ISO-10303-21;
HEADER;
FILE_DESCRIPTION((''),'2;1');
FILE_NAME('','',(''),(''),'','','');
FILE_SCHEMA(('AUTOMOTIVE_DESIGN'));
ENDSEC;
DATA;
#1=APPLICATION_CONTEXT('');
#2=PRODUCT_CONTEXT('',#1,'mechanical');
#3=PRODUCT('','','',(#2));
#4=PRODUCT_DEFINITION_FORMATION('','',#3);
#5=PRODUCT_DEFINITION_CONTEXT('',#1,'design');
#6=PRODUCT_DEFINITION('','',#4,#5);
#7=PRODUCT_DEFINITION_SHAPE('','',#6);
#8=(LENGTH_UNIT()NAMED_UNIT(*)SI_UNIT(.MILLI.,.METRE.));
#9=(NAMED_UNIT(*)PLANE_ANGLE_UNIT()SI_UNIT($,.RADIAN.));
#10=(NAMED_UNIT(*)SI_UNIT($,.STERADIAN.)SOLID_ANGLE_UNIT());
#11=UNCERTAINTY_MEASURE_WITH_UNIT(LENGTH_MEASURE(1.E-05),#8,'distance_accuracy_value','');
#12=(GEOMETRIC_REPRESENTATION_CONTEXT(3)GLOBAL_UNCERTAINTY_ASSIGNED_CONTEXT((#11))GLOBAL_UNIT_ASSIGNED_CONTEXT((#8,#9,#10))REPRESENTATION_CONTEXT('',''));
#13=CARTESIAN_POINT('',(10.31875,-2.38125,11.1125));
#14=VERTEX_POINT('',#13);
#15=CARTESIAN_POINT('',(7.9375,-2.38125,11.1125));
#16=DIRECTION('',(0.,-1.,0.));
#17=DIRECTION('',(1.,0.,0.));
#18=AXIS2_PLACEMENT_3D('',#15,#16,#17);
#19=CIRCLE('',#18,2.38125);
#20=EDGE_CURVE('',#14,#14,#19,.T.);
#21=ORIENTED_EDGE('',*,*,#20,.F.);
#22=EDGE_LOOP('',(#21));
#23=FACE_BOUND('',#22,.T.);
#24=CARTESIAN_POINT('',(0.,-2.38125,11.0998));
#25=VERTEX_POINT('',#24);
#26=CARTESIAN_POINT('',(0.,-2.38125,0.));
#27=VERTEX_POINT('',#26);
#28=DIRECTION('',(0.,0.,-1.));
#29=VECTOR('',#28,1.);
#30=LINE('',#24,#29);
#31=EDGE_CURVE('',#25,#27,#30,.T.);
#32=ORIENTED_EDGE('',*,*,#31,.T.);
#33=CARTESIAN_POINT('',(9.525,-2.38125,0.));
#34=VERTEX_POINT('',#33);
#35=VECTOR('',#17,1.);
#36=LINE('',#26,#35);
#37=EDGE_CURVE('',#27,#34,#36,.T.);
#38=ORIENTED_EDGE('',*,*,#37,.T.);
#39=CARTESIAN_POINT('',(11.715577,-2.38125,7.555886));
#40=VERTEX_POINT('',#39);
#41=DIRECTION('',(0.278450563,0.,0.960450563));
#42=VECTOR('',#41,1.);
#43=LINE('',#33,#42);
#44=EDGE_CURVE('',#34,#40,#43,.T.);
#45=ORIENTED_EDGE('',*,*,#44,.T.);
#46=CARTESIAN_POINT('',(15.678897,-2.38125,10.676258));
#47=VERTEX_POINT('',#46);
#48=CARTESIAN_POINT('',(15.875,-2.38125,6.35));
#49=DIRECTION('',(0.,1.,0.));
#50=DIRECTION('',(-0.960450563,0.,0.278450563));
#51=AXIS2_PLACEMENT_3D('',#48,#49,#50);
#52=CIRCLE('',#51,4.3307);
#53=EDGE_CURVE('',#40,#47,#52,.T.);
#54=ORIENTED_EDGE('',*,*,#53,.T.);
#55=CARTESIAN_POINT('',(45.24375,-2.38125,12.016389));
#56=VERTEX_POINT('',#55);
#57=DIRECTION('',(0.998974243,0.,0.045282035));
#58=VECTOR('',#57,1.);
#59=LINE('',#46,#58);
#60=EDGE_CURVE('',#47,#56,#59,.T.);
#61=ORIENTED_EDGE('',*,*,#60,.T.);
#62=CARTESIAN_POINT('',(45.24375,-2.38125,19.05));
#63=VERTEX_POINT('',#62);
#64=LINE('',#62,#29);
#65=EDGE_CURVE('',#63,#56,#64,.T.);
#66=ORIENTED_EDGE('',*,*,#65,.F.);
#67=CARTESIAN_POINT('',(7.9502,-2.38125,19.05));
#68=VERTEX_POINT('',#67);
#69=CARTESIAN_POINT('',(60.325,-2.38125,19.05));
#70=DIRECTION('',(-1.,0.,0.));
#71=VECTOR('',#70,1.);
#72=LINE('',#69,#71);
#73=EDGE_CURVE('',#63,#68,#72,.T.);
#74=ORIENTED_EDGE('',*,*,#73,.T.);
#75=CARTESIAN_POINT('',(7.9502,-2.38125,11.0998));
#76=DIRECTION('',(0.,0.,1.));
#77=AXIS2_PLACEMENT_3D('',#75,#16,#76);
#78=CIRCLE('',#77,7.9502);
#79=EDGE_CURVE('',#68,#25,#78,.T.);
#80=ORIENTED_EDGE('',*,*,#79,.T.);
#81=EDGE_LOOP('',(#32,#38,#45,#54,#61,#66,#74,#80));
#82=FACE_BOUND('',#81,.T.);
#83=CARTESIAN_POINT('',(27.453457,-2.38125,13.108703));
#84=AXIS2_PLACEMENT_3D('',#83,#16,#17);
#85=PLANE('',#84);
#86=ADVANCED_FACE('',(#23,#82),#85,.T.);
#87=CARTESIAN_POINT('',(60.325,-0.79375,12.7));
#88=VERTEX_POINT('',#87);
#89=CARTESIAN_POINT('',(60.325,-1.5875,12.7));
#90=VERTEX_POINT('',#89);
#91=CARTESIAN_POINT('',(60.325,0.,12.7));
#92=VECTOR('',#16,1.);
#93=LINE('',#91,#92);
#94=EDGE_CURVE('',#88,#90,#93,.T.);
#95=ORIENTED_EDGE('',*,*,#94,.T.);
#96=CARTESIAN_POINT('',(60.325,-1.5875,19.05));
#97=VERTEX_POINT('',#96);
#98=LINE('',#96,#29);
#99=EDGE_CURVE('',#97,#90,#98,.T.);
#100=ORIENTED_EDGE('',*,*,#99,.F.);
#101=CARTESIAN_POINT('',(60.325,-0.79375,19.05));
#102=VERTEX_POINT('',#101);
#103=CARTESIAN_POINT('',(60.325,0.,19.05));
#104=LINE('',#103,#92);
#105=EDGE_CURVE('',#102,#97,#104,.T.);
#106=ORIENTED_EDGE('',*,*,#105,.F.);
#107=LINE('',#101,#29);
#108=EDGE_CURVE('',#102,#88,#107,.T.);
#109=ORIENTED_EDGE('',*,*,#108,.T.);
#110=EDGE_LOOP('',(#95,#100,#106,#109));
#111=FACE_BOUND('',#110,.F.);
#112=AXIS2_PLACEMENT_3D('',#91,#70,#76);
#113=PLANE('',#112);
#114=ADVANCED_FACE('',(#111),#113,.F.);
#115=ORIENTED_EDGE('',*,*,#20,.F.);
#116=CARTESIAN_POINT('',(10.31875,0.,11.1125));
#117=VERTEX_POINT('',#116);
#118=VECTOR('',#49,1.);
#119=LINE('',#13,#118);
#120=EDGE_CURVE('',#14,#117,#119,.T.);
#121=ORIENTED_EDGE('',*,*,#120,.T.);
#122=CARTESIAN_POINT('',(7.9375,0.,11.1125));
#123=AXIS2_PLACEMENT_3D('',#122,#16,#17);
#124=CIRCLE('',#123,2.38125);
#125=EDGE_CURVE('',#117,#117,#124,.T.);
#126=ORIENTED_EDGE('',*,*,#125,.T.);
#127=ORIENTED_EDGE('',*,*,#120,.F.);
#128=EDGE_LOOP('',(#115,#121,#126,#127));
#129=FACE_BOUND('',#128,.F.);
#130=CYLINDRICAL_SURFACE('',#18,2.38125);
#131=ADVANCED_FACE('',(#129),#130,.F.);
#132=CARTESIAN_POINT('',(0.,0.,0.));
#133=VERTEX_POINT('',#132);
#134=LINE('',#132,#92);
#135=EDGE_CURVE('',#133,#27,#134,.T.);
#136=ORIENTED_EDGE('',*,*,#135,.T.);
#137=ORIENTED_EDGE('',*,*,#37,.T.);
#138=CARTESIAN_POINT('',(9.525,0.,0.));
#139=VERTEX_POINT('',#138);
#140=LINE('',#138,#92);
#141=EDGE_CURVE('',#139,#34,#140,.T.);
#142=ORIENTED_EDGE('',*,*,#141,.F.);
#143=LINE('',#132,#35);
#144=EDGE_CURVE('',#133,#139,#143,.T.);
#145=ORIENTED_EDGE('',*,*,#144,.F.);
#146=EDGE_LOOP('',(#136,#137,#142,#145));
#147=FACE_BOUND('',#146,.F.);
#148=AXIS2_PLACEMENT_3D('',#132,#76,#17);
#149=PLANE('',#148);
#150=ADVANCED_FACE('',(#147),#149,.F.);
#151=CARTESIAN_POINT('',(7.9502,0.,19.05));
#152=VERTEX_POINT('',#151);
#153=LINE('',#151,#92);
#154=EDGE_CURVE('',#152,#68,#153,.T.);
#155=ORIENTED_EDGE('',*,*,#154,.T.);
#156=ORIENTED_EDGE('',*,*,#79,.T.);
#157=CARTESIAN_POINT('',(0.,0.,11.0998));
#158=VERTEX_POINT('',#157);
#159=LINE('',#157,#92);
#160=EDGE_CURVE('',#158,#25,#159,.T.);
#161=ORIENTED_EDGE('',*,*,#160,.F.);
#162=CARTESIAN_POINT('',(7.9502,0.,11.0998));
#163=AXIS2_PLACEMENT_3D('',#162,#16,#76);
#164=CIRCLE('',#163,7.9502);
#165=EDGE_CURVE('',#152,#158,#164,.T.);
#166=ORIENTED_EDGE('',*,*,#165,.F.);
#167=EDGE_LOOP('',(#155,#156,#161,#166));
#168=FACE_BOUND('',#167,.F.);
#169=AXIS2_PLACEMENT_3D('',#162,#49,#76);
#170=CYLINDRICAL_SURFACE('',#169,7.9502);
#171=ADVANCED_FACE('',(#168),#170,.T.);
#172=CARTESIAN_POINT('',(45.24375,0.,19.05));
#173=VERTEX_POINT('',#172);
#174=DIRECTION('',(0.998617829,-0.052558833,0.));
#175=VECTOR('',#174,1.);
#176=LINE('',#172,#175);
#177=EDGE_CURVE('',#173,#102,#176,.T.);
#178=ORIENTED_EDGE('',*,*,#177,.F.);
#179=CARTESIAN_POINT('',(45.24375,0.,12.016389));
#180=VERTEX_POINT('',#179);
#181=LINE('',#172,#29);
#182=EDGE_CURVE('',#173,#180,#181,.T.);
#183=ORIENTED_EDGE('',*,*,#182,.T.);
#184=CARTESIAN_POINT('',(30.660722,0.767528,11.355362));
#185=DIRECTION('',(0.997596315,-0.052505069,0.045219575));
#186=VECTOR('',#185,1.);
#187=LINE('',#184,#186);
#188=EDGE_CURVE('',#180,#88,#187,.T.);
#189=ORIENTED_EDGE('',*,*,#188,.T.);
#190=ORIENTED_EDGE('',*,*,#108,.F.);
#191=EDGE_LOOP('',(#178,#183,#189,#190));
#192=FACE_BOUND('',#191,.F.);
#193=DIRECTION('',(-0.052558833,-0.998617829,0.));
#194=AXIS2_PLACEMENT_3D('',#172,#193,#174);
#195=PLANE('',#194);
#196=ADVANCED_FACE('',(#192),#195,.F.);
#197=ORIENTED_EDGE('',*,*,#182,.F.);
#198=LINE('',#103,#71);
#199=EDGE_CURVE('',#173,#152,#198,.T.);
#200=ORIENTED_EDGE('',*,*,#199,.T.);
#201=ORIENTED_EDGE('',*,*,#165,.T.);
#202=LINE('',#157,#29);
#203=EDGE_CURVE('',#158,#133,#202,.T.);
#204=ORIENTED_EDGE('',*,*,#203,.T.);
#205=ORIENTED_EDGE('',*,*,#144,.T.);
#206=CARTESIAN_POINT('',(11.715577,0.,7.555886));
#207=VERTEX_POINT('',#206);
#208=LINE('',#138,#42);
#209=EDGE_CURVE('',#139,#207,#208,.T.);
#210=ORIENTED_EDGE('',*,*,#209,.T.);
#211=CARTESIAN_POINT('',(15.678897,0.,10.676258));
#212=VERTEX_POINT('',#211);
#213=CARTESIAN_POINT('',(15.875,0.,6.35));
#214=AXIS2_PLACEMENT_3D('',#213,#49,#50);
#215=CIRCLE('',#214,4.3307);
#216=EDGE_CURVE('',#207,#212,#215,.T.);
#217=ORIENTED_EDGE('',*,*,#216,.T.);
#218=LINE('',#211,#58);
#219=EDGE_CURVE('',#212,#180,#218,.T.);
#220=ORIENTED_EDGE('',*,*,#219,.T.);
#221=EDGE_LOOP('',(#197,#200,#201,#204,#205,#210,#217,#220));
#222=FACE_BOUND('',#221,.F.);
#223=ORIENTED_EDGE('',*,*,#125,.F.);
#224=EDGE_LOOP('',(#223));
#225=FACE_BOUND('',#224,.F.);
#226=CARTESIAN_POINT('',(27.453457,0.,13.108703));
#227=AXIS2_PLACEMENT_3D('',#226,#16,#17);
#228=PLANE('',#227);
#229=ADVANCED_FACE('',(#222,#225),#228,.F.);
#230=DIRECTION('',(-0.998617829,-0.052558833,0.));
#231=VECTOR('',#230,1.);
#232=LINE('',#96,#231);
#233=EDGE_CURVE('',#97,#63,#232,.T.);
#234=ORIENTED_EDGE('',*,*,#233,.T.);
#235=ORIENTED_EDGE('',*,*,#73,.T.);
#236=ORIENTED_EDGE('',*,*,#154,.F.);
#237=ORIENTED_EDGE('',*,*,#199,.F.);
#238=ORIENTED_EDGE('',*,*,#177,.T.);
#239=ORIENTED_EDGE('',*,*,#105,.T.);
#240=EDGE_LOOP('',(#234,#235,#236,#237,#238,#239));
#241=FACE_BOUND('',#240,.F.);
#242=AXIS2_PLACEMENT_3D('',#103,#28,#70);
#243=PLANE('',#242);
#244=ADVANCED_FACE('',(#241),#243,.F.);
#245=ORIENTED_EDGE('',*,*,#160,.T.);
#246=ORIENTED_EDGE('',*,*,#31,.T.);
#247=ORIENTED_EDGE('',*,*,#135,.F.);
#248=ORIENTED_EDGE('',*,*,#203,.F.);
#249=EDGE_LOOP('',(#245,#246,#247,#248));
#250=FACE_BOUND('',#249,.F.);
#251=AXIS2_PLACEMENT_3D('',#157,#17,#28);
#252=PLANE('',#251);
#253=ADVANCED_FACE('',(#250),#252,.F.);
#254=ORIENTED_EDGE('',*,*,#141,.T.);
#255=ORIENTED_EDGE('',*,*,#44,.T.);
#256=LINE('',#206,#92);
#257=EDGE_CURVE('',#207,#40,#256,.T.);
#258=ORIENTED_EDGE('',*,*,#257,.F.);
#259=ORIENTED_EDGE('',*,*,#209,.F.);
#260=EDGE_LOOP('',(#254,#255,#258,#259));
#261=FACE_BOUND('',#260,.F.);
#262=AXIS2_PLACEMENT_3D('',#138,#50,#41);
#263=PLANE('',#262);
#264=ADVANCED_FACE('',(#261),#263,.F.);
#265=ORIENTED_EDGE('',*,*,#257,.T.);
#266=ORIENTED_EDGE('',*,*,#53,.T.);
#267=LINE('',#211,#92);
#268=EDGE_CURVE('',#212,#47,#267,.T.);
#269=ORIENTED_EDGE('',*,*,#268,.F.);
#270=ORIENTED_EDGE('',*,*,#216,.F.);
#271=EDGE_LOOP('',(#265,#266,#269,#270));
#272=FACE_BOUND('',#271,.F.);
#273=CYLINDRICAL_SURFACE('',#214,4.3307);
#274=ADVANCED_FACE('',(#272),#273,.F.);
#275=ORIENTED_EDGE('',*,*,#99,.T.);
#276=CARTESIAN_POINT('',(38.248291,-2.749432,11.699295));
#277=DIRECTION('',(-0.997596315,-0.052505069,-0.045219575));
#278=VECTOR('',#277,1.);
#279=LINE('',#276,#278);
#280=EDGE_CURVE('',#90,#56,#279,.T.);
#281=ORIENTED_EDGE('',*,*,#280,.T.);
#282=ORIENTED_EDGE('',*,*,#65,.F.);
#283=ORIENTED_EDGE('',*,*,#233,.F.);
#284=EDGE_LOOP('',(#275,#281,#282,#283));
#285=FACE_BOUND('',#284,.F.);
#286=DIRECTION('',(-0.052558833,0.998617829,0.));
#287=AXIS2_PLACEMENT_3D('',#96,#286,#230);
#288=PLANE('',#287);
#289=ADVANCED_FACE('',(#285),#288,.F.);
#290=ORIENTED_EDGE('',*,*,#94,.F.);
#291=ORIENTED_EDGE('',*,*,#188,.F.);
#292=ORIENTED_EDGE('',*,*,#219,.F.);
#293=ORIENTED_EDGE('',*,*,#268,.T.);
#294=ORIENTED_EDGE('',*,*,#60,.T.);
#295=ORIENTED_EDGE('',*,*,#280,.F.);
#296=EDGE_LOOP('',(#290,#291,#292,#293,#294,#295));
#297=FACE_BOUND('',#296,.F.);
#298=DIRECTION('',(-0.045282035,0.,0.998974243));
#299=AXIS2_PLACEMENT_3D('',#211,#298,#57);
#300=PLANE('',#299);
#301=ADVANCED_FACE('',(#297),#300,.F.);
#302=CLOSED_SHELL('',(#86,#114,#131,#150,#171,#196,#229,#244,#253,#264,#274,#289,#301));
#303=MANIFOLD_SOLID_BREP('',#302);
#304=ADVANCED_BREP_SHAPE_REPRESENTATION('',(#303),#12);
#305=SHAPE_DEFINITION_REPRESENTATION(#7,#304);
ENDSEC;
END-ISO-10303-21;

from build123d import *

# Parameters (mm, degrees)
F1_DEPTH = 2.38125
F2_R     = 2.38125
F3_DEPTH = 25.4
F5_DEPTH = 25.4


# Not quite as in the source:
# - a length typed as a fraction of an inch, garbled in the dataset ("3 / 203.2 mm" for 3/8 in), is restored


with BuildPart() as f1:
    # F0 (on Front) → F1 (new body)
    with BuildSketch(Plane.XZ):
        with BuildLine():
            Line((60.325, 19.05), (7.9502, 19.05))
            ThreePointArc((7.9502, 19.05), (2.3285596682, 16.7214403318), (0, 11.0998))
            Line((0, 11.0998), (0, 0))
            Line((0, 0), (9.525, 0))
            Line((9.525, 0), (11.7155767468, 7.5558858532))
            ThreePointArc((11.7155767468, 7.5558858532), (13.1960389642, 9.7526651699), (15.6788970925, 10.6762577523))
            Line((15.6788970925, 10.6762577523), (60.325, 12.7))
            Line((60.325, 12.7), (60.325, 19.05))
        make_face()
    extrude(amount=F1_DEPTH)

    # F2 (on face) → F3 (cut)
    with BuildSketch(Plane.XZ.offset(2.38125)):
        with Locations((7.9375, 11.1125)):
            Circle(F2_R)
    extrude(amount=-F3_DEPTH, mode=Mode.SUBTRACT)

    # F4 (on face) → F5 (cut)
    with BuildSketch(Plane.XY.offset(19.05)):
        Polygon((60.325, 0), (45.24375, 0), (60.325, -0.79375), align=None)
        Polygon((60.325, -2.38125), (60.325, -1.5875), (45.24375, -2.38125), align=None)
    extrude(amount=-F5_DEPTH, mode=Mode.SUBTRACT)


solid = f1.part
